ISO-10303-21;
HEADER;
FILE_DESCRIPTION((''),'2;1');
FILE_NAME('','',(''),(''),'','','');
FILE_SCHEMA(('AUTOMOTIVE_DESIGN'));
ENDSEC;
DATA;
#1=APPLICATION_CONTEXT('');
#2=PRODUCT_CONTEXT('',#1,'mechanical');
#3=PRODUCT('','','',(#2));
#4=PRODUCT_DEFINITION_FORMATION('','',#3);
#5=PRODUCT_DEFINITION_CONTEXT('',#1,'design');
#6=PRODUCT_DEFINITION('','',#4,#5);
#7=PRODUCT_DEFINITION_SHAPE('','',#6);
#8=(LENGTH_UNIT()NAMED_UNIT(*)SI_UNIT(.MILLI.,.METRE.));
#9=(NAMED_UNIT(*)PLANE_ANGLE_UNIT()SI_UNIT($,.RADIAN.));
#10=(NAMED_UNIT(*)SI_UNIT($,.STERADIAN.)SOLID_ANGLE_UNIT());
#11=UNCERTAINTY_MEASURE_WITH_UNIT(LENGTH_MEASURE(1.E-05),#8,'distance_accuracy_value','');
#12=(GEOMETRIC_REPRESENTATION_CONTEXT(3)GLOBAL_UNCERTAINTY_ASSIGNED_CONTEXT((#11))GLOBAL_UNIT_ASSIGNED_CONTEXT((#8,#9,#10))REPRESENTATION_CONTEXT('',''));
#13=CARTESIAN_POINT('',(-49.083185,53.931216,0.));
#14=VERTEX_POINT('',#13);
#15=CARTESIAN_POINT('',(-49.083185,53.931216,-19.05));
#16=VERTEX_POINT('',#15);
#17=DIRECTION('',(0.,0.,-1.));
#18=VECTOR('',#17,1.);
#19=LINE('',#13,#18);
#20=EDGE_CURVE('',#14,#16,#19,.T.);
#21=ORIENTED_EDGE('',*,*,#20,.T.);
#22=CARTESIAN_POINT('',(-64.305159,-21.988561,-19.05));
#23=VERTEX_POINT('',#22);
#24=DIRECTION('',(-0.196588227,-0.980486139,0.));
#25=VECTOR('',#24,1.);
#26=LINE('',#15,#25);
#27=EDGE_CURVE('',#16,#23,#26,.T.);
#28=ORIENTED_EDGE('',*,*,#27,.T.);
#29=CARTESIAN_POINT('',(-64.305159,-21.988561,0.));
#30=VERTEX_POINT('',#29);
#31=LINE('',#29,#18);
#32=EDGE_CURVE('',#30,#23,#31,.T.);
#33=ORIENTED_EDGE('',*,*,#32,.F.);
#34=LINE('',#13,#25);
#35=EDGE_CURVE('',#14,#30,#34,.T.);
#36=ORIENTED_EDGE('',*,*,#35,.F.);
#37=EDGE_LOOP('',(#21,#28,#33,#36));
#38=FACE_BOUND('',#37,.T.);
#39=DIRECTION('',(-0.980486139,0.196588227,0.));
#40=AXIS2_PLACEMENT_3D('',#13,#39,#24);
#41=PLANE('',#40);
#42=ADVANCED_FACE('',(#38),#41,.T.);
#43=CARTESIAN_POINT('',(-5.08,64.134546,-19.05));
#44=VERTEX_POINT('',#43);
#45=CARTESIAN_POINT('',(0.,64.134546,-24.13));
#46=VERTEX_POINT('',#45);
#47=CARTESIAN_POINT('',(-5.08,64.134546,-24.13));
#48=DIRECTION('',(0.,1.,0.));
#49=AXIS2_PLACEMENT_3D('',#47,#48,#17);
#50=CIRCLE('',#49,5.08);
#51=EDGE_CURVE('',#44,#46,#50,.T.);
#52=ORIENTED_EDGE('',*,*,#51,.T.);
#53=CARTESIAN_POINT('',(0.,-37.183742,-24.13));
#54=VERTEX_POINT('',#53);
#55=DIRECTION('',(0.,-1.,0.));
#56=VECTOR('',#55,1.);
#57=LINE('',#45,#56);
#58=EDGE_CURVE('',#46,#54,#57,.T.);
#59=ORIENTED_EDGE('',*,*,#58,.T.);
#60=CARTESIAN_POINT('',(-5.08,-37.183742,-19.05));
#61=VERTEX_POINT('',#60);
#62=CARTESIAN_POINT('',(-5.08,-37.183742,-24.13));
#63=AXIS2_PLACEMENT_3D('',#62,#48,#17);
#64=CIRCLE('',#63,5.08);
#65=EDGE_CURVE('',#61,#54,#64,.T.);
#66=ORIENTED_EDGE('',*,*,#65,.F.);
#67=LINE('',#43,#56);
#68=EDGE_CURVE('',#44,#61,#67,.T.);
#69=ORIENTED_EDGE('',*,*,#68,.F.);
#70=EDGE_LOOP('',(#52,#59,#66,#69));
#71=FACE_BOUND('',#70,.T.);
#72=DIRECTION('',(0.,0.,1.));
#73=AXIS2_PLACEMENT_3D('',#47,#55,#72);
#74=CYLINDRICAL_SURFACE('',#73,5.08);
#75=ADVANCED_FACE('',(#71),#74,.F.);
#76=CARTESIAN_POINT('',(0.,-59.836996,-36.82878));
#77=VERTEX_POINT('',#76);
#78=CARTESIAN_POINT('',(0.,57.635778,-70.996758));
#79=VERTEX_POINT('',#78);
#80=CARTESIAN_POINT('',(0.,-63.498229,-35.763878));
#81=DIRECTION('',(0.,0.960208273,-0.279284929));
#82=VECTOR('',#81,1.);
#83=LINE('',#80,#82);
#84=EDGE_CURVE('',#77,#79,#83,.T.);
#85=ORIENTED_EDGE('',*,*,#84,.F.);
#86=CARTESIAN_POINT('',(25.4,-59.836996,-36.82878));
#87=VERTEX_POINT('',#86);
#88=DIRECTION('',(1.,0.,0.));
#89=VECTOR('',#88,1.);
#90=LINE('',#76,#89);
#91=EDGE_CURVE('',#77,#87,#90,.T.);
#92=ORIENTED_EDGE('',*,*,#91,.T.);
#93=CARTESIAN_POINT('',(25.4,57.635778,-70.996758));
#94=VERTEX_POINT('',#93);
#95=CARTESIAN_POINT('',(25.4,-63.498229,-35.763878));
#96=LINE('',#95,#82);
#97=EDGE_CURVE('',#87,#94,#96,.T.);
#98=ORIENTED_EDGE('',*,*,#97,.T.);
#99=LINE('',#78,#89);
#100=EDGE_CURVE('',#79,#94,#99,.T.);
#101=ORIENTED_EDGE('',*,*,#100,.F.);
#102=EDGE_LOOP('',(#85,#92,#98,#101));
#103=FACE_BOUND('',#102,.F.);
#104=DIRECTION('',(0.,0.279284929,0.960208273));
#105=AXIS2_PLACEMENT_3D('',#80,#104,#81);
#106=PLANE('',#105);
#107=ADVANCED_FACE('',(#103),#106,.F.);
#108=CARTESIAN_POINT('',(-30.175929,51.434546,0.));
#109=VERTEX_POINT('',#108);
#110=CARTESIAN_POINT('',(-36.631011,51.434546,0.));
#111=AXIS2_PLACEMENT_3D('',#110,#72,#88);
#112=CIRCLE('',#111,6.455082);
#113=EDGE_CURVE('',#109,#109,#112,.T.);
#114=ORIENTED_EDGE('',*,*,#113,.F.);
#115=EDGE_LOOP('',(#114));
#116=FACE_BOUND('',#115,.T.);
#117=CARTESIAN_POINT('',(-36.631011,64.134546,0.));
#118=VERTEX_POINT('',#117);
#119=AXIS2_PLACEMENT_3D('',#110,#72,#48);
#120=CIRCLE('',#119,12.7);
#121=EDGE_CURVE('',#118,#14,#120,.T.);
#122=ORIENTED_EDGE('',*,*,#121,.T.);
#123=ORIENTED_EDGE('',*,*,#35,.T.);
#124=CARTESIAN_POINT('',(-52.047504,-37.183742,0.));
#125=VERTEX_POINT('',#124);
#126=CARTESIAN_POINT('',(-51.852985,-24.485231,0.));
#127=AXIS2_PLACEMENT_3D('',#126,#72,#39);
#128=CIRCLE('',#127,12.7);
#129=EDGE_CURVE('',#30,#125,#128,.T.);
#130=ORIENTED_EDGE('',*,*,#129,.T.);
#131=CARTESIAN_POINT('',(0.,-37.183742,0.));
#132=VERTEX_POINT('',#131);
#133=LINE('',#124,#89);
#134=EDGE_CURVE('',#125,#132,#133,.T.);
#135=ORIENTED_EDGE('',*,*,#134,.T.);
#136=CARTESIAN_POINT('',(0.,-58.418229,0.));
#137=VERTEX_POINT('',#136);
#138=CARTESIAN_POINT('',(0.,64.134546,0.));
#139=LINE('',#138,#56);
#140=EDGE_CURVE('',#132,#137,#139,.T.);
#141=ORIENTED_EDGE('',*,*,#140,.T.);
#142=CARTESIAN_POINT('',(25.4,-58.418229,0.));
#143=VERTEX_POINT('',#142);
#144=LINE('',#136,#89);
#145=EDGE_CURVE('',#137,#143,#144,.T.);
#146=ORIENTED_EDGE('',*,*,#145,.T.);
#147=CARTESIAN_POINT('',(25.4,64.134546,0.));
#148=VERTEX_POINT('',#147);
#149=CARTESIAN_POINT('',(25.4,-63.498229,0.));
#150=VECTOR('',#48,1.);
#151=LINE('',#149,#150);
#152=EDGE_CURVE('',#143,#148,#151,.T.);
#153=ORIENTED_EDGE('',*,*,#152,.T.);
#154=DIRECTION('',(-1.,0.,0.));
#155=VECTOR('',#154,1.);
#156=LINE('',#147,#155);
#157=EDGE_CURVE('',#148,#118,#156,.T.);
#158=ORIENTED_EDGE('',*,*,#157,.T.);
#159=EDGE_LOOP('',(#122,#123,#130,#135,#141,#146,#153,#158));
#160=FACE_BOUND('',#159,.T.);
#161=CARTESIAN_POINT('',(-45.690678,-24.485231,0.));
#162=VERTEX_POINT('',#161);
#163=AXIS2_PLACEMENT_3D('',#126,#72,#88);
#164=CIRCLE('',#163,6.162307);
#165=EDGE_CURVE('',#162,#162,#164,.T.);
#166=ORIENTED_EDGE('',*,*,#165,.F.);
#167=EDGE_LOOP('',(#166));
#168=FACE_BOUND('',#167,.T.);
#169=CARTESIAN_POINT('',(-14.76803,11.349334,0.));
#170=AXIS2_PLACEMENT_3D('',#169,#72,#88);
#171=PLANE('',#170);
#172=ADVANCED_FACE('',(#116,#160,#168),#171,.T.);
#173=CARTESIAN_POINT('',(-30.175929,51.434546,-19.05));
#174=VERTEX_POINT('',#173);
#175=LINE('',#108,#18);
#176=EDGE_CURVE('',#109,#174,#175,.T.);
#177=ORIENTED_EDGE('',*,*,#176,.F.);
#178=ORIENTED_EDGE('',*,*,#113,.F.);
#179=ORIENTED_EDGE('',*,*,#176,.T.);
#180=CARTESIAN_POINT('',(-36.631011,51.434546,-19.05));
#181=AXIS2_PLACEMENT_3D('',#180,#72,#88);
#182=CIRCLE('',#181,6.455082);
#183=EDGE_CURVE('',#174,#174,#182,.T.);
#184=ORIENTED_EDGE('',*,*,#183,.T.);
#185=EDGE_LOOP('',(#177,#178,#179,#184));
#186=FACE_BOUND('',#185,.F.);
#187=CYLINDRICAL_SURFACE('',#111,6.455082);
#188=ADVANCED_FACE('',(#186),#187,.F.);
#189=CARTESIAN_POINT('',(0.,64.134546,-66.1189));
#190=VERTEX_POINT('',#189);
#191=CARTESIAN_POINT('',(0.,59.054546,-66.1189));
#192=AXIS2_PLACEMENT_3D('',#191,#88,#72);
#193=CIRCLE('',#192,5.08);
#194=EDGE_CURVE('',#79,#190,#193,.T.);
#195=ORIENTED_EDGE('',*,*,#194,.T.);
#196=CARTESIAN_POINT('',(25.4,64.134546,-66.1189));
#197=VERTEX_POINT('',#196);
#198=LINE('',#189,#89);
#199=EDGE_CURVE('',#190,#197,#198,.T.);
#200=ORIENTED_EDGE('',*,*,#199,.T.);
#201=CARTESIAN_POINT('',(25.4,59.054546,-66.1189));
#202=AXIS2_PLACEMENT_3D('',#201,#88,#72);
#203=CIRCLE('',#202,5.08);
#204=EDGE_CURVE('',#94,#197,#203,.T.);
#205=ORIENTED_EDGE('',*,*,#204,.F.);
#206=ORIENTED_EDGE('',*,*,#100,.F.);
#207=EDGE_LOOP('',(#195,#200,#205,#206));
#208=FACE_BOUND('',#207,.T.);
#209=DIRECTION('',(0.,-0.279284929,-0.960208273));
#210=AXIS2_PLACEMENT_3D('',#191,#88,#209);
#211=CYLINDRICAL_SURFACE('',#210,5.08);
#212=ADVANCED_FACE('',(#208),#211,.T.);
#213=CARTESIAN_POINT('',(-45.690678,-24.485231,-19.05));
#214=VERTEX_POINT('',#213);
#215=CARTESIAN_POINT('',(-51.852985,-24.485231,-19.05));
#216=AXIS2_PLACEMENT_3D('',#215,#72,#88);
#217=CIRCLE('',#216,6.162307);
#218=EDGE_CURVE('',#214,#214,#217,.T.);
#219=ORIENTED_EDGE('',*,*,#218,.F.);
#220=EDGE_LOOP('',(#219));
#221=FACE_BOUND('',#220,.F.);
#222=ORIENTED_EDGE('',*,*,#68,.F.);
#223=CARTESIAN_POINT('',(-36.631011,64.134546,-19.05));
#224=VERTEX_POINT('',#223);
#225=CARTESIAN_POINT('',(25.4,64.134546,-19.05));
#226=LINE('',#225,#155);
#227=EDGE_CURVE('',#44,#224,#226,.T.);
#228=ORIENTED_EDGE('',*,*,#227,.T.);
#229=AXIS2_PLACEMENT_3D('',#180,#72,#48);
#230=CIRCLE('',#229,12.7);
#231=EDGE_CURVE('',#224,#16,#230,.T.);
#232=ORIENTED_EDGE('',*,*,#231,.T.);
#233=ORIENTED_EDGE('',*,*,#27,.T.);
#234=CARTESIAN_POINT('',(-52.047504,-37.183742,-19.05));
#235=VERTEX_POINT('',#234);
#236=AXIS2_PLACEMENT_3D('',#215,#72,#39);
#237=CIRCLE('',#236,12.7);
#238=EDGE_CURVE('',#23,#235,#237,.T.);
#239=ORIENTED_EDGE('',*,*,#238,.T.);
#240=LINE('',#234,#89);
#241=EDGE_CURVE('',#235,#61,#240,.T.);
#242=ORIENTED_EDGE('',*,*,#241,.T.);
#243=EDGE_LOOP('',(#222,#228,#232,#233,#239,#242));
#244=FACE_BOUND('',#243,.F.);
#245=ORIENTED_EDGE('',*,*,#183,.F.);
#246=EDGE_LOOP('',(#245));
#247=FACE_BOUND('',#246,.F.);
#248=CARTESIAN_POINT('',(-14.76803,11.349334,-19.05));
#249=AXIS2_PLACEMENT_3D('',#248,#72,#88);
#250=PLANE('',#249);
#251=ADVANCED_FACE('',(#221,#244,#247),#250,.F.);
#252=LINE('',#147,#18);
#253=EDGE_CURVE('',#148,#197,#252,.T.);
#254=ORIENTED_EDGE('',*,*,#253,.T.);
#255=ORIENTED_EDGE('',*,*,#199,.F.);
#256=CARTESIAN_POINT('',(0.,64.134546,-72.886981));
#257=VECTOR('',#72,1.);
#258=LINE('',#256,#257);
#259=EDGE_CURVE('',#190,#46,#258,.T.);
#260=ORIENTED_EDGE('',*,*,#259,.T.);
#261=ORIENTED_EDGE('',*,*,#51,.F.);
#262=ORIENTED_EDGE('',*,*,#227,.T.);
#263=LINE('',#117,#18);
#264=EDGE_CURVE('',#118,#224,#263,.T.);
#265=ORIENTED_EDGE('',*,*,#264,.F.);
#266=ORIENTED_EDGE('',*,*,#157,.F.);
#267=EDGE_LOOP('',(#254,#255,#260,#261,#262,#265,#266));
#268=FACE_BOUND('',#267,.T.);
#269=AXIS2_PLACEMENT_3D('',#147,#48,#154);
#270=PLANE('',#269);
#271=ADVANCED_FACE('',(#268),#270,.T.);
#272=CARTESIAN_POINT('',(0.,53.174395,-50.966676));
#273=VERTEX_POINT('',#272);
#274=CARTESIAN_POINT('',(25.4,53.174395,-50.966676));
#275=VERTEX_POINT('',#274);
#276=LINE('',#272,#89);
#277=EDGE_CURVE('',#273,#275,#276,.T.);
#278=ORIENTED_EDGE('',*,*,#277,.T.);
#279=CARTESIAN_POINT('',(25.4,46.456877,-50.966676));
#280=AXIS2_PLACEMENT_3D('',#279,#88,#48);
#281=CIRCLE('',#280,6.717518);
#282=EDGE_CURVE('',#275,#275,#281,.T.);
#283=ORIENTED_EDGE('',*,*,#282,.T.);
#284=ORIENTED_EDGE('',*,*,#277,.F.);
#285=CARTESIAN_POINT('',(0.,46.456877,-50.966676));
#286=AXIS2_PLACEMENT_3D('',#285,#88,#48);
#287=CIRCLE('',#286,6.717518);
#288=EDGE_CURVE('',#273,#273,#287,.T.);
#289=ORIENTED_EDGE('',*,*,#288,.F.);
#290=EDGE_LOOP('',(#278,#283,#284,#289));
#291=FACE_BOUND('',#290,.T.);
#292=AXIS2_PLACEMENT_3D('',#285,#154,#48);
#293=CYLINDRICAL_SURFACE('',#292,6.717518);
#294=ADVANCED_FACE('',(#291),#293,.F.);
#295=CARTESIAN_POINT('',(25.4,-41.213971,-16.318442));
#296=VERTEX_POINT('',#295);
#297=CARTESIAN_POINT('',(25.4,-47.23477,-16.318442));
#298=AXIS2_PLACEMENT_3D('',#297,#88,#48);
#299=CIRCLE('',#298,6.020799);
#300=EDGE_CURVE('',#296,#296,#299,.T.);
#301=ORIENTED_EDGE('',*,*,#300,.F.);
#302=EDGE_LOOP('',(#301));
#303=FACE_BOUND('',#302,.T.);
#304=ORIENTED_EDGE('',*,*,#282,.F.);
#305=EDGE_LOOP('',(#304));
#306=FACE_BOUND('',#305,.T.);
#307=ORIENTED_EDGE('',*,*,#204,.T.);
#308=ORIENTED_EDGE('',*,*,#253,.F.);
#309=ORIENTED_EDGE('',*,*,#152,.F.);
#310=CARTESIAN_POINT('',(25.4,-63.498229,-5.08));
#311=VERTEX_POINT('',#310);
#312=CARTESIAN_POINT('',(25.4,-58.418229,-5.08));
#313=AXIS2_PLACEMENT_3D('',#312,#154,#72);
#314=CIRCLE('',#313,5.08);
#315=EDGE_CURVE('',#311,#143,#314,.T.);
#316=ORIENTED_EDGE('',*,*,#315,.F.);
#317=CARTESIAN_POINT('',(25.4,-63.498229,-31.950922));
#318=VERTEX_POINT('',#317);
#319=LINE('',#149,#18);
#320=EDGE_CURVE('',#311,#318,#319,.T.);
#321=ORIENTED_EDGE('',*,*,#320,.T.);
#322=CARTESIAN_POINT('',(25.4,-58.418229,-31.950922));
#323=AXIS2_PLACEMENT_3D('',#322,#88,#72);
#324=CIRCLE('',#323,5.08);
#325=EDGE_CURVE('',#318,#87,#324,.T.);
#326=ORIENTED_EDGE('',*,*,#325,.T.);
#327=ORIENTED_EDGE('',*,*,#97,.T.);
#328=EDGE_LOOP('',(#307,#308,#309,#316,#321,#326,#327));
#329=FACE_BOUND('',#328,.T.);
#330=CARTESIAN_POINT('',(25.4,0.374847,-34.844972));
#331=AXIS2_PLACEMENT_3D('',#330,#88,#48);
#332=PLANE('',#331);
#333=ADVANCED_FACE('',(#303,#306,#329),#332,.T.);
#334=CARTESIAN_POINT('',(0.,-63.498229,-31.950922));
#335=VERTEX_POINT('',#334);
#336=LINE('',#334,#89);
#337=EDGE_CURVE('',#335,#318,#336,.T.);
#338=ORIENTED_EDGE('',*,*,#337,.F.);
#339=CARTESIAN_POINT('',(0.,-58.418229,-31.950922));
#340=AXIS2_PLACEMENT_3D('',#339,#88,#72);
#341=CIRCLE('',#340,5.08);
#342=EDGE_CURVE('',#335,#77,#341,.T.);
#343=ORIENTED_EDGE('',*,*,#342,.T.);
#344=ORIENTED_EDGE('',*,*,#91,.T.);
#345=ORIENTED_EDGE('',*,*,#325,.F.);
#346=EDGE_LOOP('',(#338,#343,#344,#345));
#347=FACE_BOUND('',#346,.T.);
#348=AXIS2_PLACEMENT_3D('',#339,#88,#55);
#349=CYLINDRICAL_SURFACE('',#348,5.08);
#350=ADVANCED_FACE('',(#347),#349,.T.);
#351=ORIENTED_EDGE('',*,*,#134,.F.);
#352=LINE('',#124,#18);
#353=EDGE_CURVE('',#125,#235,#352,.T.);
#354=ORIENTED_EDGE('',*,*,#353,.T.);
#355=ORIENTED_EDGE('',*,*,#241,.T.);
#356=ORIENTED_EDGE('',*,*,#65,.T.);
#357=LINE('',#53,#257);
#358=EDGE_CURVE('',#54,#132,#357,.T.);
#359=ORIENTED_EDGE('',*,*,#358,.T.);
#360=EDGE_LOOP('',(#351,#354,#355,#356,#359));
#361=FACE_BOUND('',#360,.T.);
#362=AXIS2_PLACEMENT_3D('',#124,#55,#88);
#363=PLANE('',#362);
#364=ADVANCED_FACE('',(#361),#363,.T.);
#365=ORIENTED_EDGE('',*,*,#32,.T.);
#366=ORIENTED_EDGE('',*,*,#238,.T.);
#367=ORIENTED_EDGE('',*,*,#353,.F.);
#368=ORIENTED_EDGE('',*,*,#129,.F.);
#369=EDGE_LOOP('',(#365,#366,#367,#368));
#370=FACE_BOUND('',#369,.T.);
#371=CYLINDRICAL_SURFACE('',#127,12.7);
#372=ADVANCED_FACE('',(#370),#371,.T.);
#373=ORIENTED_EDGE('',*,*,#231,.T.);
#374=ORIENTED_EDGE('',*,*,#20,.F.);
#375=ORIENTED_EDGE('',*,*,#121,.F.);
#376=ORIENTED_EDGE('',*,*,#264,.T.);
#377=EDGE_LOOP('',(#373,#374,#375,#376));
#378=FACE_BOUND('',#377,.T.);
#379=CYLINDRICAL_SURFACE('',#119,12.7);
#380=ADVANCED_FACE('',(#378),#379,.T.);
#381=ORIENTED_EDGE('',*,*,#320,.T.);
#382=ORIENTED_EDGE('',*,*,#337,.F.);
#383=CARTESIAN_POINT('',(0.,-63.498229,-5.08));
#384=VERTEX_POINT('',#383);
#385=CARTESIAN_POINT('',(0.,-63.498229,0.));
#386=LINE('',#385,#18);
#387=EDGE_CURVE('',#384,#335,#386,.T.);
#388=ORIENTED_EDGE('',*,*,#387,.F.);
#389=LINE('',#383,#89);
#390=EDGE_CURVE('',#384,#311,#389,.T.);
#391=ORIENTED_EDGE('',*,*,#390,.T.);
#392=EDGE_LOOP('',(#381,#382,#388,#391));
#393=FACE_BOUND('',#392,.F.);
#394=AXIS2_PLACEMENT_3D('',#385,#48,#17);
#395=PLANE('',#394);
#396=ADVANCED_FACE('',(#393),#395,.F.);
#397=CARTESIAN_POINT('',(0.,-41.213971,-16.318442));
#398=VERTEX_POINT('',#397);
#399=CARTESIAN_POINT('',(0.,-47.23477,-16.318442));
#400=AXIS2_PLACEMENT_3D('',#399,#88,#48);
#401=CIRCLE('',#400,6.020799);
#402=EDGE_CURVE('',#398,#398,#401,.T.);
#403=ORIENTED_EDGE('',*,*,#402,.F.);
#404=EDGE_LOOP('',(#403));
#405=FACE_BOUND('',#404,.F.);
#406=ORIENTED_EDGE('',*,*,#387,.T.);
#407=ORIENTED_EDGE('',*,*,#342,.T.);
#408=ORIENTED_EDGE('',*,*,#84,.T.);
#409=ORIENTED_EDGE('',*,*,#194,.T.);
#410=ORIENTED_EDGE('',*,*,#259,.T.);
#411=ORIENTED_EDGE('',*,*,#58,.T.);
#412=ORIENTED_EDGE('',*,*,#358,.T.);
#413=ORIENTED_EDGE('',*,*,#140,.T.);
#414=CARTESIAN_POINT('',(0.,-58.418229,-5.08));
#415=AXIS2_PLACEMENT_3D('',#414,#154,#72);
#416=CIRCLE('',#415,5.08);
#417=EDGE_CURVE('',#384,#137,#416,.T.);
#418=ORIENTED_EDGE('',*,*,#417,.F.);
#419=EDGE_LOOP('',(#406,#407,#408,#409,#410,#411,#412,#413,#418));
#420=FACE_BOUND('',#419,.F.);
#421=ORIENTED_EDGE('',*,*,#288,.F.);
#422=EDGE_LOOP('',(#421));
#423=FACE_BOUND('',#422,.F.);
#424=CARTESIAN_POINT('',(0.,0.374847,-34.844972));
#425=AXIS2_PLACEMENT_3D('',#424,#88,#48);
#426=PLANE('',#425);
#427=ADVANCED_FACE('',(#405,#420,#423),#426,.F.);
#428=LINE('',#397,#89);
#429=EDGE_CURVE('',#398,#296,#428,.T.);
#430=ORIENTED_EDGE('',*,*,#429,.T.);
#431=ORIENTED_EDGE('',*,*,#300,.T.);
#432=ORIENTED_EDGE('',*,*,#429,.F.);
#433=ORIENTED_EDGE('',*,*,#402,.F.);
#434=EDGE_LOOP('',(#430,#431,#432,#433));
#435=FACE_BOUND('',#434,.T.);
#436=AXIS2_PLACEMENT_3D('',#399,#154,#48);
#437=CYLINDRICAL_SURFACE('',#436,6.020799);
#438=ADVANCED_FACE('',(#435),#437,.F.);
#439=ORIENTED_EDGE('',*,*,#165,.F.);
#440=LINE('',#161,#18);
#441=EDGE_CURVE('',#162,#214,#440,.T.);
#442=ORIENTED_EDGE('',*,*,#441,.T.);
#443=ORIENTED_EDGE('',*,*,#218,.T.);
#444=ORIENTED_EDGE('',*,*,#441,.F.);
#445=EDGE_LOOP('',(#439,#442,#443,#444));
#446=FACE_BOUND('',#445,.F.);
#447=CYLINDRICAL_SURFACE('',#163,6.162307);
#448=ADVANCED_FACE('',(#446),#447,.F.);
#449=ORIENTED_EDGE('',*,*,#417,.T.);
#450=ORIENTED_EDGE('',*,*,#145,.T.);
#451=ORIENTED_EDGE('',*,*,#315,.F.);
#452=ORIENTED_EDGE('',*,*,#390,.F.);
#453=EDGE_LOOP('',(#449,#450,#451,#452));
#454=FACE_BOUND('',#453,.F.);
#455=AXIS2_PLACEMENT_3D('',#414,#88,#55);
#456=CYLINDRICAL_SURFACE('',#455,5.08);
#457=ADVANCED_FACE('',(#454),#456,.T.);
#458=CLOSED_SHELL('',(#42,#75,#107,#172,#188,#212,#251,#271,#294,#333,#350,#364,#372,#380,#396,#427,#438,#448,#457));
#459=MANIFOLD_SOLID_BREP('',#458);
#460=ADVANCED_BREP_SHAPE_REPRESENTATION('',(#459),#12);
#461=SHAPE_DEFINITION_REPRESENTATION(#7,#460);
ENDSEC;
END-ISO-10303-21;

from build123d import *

# Parameters (mm, degrees)
F0_R     = 6.717517972
F0_R_2   = 6.020799142
F0_W     = 93.3380946517
F0_H     = 25.1572784036
F1_DEPTH = 25.4
F2_R     = 6.1623070593
F2_R_2   = 6.4550817185
F3_DEPTH = 19.05
F4_R     = 5.08


with BuildPart() as f1:
    # F0 (on Right) → F1 (new body)
    with BuildSketch(Plane.YZ):
        Polygon((-29.2035490274, 0), (-63.4982287884, 0), (-63.4982287884, -35.7638783753), (64.1345456243, -72.88698107), (64.1345456243, -25.1572784036), (-29.2035490274, -25.1572784036), align=None)
        with Locations((46.4568771422, -50.9666763246)):
            Circle(F0_R, mode=Mode.SUBTRACT)
        with Locations((-47.2347699106, -16.3184423)):
            Circle(F0_R_2, mode=Mode.SUBTRACT)
        with Locations((17.4654982984, -12.5786392018)):
            Rectangle(F0_W, F0_H)
    extrude(amount=F1_DEPTH)

    # F2 (on Top) → F3 (join)
    with BuildSketch(Plane.XY):
        with BuildLine():
            Line((-49.083184828, 53.9312161083), (-64.3051586518, -21.9885608041))
            ThreePointArc((-64.3051586518, -21.9885608041), (-61.737725203, -32.4590575274), (-52.0475044965, -37.1837415174))
            Line((-52.0475044965, -37.1837415174), (25.4, -37.1837415174))
            Line((25.4, -37.1837415174), (25.4, 64.1345456243))
            Line((25.4, 64.1345456243), (-36.6310108614, 64.1345456243))
            ThreePointArc((-36.6310108614, 64.1345456243), (-44.6803053911, 61.2579288283), (-49.083184828, 53.9312161083))
        make_face()
        with Locations((-51.8529846852, -24.4852312881)):
            Circle(F2_R, mode=Mode.SUBTRACT)
        with Locations((-36.6310108614, 51.4345456243)):
            Circle(F2_R_2, mode=Mode.SUBTRACT)
    extrude(amount=-F3_DEPTH)

    # F4
    f4_edges = [f1.edges().sort_by_distance(p)[0] for p in [
        (12.7, 64.134546, -72.886981),
        (12.7, -63.498229, -35.763878),
        (12.7, -63.498229, 0),
        (0, 13.475402, -19.05),
    ]]
    fillet(f4_edges, radius=F4_R)


solid = f1.part
